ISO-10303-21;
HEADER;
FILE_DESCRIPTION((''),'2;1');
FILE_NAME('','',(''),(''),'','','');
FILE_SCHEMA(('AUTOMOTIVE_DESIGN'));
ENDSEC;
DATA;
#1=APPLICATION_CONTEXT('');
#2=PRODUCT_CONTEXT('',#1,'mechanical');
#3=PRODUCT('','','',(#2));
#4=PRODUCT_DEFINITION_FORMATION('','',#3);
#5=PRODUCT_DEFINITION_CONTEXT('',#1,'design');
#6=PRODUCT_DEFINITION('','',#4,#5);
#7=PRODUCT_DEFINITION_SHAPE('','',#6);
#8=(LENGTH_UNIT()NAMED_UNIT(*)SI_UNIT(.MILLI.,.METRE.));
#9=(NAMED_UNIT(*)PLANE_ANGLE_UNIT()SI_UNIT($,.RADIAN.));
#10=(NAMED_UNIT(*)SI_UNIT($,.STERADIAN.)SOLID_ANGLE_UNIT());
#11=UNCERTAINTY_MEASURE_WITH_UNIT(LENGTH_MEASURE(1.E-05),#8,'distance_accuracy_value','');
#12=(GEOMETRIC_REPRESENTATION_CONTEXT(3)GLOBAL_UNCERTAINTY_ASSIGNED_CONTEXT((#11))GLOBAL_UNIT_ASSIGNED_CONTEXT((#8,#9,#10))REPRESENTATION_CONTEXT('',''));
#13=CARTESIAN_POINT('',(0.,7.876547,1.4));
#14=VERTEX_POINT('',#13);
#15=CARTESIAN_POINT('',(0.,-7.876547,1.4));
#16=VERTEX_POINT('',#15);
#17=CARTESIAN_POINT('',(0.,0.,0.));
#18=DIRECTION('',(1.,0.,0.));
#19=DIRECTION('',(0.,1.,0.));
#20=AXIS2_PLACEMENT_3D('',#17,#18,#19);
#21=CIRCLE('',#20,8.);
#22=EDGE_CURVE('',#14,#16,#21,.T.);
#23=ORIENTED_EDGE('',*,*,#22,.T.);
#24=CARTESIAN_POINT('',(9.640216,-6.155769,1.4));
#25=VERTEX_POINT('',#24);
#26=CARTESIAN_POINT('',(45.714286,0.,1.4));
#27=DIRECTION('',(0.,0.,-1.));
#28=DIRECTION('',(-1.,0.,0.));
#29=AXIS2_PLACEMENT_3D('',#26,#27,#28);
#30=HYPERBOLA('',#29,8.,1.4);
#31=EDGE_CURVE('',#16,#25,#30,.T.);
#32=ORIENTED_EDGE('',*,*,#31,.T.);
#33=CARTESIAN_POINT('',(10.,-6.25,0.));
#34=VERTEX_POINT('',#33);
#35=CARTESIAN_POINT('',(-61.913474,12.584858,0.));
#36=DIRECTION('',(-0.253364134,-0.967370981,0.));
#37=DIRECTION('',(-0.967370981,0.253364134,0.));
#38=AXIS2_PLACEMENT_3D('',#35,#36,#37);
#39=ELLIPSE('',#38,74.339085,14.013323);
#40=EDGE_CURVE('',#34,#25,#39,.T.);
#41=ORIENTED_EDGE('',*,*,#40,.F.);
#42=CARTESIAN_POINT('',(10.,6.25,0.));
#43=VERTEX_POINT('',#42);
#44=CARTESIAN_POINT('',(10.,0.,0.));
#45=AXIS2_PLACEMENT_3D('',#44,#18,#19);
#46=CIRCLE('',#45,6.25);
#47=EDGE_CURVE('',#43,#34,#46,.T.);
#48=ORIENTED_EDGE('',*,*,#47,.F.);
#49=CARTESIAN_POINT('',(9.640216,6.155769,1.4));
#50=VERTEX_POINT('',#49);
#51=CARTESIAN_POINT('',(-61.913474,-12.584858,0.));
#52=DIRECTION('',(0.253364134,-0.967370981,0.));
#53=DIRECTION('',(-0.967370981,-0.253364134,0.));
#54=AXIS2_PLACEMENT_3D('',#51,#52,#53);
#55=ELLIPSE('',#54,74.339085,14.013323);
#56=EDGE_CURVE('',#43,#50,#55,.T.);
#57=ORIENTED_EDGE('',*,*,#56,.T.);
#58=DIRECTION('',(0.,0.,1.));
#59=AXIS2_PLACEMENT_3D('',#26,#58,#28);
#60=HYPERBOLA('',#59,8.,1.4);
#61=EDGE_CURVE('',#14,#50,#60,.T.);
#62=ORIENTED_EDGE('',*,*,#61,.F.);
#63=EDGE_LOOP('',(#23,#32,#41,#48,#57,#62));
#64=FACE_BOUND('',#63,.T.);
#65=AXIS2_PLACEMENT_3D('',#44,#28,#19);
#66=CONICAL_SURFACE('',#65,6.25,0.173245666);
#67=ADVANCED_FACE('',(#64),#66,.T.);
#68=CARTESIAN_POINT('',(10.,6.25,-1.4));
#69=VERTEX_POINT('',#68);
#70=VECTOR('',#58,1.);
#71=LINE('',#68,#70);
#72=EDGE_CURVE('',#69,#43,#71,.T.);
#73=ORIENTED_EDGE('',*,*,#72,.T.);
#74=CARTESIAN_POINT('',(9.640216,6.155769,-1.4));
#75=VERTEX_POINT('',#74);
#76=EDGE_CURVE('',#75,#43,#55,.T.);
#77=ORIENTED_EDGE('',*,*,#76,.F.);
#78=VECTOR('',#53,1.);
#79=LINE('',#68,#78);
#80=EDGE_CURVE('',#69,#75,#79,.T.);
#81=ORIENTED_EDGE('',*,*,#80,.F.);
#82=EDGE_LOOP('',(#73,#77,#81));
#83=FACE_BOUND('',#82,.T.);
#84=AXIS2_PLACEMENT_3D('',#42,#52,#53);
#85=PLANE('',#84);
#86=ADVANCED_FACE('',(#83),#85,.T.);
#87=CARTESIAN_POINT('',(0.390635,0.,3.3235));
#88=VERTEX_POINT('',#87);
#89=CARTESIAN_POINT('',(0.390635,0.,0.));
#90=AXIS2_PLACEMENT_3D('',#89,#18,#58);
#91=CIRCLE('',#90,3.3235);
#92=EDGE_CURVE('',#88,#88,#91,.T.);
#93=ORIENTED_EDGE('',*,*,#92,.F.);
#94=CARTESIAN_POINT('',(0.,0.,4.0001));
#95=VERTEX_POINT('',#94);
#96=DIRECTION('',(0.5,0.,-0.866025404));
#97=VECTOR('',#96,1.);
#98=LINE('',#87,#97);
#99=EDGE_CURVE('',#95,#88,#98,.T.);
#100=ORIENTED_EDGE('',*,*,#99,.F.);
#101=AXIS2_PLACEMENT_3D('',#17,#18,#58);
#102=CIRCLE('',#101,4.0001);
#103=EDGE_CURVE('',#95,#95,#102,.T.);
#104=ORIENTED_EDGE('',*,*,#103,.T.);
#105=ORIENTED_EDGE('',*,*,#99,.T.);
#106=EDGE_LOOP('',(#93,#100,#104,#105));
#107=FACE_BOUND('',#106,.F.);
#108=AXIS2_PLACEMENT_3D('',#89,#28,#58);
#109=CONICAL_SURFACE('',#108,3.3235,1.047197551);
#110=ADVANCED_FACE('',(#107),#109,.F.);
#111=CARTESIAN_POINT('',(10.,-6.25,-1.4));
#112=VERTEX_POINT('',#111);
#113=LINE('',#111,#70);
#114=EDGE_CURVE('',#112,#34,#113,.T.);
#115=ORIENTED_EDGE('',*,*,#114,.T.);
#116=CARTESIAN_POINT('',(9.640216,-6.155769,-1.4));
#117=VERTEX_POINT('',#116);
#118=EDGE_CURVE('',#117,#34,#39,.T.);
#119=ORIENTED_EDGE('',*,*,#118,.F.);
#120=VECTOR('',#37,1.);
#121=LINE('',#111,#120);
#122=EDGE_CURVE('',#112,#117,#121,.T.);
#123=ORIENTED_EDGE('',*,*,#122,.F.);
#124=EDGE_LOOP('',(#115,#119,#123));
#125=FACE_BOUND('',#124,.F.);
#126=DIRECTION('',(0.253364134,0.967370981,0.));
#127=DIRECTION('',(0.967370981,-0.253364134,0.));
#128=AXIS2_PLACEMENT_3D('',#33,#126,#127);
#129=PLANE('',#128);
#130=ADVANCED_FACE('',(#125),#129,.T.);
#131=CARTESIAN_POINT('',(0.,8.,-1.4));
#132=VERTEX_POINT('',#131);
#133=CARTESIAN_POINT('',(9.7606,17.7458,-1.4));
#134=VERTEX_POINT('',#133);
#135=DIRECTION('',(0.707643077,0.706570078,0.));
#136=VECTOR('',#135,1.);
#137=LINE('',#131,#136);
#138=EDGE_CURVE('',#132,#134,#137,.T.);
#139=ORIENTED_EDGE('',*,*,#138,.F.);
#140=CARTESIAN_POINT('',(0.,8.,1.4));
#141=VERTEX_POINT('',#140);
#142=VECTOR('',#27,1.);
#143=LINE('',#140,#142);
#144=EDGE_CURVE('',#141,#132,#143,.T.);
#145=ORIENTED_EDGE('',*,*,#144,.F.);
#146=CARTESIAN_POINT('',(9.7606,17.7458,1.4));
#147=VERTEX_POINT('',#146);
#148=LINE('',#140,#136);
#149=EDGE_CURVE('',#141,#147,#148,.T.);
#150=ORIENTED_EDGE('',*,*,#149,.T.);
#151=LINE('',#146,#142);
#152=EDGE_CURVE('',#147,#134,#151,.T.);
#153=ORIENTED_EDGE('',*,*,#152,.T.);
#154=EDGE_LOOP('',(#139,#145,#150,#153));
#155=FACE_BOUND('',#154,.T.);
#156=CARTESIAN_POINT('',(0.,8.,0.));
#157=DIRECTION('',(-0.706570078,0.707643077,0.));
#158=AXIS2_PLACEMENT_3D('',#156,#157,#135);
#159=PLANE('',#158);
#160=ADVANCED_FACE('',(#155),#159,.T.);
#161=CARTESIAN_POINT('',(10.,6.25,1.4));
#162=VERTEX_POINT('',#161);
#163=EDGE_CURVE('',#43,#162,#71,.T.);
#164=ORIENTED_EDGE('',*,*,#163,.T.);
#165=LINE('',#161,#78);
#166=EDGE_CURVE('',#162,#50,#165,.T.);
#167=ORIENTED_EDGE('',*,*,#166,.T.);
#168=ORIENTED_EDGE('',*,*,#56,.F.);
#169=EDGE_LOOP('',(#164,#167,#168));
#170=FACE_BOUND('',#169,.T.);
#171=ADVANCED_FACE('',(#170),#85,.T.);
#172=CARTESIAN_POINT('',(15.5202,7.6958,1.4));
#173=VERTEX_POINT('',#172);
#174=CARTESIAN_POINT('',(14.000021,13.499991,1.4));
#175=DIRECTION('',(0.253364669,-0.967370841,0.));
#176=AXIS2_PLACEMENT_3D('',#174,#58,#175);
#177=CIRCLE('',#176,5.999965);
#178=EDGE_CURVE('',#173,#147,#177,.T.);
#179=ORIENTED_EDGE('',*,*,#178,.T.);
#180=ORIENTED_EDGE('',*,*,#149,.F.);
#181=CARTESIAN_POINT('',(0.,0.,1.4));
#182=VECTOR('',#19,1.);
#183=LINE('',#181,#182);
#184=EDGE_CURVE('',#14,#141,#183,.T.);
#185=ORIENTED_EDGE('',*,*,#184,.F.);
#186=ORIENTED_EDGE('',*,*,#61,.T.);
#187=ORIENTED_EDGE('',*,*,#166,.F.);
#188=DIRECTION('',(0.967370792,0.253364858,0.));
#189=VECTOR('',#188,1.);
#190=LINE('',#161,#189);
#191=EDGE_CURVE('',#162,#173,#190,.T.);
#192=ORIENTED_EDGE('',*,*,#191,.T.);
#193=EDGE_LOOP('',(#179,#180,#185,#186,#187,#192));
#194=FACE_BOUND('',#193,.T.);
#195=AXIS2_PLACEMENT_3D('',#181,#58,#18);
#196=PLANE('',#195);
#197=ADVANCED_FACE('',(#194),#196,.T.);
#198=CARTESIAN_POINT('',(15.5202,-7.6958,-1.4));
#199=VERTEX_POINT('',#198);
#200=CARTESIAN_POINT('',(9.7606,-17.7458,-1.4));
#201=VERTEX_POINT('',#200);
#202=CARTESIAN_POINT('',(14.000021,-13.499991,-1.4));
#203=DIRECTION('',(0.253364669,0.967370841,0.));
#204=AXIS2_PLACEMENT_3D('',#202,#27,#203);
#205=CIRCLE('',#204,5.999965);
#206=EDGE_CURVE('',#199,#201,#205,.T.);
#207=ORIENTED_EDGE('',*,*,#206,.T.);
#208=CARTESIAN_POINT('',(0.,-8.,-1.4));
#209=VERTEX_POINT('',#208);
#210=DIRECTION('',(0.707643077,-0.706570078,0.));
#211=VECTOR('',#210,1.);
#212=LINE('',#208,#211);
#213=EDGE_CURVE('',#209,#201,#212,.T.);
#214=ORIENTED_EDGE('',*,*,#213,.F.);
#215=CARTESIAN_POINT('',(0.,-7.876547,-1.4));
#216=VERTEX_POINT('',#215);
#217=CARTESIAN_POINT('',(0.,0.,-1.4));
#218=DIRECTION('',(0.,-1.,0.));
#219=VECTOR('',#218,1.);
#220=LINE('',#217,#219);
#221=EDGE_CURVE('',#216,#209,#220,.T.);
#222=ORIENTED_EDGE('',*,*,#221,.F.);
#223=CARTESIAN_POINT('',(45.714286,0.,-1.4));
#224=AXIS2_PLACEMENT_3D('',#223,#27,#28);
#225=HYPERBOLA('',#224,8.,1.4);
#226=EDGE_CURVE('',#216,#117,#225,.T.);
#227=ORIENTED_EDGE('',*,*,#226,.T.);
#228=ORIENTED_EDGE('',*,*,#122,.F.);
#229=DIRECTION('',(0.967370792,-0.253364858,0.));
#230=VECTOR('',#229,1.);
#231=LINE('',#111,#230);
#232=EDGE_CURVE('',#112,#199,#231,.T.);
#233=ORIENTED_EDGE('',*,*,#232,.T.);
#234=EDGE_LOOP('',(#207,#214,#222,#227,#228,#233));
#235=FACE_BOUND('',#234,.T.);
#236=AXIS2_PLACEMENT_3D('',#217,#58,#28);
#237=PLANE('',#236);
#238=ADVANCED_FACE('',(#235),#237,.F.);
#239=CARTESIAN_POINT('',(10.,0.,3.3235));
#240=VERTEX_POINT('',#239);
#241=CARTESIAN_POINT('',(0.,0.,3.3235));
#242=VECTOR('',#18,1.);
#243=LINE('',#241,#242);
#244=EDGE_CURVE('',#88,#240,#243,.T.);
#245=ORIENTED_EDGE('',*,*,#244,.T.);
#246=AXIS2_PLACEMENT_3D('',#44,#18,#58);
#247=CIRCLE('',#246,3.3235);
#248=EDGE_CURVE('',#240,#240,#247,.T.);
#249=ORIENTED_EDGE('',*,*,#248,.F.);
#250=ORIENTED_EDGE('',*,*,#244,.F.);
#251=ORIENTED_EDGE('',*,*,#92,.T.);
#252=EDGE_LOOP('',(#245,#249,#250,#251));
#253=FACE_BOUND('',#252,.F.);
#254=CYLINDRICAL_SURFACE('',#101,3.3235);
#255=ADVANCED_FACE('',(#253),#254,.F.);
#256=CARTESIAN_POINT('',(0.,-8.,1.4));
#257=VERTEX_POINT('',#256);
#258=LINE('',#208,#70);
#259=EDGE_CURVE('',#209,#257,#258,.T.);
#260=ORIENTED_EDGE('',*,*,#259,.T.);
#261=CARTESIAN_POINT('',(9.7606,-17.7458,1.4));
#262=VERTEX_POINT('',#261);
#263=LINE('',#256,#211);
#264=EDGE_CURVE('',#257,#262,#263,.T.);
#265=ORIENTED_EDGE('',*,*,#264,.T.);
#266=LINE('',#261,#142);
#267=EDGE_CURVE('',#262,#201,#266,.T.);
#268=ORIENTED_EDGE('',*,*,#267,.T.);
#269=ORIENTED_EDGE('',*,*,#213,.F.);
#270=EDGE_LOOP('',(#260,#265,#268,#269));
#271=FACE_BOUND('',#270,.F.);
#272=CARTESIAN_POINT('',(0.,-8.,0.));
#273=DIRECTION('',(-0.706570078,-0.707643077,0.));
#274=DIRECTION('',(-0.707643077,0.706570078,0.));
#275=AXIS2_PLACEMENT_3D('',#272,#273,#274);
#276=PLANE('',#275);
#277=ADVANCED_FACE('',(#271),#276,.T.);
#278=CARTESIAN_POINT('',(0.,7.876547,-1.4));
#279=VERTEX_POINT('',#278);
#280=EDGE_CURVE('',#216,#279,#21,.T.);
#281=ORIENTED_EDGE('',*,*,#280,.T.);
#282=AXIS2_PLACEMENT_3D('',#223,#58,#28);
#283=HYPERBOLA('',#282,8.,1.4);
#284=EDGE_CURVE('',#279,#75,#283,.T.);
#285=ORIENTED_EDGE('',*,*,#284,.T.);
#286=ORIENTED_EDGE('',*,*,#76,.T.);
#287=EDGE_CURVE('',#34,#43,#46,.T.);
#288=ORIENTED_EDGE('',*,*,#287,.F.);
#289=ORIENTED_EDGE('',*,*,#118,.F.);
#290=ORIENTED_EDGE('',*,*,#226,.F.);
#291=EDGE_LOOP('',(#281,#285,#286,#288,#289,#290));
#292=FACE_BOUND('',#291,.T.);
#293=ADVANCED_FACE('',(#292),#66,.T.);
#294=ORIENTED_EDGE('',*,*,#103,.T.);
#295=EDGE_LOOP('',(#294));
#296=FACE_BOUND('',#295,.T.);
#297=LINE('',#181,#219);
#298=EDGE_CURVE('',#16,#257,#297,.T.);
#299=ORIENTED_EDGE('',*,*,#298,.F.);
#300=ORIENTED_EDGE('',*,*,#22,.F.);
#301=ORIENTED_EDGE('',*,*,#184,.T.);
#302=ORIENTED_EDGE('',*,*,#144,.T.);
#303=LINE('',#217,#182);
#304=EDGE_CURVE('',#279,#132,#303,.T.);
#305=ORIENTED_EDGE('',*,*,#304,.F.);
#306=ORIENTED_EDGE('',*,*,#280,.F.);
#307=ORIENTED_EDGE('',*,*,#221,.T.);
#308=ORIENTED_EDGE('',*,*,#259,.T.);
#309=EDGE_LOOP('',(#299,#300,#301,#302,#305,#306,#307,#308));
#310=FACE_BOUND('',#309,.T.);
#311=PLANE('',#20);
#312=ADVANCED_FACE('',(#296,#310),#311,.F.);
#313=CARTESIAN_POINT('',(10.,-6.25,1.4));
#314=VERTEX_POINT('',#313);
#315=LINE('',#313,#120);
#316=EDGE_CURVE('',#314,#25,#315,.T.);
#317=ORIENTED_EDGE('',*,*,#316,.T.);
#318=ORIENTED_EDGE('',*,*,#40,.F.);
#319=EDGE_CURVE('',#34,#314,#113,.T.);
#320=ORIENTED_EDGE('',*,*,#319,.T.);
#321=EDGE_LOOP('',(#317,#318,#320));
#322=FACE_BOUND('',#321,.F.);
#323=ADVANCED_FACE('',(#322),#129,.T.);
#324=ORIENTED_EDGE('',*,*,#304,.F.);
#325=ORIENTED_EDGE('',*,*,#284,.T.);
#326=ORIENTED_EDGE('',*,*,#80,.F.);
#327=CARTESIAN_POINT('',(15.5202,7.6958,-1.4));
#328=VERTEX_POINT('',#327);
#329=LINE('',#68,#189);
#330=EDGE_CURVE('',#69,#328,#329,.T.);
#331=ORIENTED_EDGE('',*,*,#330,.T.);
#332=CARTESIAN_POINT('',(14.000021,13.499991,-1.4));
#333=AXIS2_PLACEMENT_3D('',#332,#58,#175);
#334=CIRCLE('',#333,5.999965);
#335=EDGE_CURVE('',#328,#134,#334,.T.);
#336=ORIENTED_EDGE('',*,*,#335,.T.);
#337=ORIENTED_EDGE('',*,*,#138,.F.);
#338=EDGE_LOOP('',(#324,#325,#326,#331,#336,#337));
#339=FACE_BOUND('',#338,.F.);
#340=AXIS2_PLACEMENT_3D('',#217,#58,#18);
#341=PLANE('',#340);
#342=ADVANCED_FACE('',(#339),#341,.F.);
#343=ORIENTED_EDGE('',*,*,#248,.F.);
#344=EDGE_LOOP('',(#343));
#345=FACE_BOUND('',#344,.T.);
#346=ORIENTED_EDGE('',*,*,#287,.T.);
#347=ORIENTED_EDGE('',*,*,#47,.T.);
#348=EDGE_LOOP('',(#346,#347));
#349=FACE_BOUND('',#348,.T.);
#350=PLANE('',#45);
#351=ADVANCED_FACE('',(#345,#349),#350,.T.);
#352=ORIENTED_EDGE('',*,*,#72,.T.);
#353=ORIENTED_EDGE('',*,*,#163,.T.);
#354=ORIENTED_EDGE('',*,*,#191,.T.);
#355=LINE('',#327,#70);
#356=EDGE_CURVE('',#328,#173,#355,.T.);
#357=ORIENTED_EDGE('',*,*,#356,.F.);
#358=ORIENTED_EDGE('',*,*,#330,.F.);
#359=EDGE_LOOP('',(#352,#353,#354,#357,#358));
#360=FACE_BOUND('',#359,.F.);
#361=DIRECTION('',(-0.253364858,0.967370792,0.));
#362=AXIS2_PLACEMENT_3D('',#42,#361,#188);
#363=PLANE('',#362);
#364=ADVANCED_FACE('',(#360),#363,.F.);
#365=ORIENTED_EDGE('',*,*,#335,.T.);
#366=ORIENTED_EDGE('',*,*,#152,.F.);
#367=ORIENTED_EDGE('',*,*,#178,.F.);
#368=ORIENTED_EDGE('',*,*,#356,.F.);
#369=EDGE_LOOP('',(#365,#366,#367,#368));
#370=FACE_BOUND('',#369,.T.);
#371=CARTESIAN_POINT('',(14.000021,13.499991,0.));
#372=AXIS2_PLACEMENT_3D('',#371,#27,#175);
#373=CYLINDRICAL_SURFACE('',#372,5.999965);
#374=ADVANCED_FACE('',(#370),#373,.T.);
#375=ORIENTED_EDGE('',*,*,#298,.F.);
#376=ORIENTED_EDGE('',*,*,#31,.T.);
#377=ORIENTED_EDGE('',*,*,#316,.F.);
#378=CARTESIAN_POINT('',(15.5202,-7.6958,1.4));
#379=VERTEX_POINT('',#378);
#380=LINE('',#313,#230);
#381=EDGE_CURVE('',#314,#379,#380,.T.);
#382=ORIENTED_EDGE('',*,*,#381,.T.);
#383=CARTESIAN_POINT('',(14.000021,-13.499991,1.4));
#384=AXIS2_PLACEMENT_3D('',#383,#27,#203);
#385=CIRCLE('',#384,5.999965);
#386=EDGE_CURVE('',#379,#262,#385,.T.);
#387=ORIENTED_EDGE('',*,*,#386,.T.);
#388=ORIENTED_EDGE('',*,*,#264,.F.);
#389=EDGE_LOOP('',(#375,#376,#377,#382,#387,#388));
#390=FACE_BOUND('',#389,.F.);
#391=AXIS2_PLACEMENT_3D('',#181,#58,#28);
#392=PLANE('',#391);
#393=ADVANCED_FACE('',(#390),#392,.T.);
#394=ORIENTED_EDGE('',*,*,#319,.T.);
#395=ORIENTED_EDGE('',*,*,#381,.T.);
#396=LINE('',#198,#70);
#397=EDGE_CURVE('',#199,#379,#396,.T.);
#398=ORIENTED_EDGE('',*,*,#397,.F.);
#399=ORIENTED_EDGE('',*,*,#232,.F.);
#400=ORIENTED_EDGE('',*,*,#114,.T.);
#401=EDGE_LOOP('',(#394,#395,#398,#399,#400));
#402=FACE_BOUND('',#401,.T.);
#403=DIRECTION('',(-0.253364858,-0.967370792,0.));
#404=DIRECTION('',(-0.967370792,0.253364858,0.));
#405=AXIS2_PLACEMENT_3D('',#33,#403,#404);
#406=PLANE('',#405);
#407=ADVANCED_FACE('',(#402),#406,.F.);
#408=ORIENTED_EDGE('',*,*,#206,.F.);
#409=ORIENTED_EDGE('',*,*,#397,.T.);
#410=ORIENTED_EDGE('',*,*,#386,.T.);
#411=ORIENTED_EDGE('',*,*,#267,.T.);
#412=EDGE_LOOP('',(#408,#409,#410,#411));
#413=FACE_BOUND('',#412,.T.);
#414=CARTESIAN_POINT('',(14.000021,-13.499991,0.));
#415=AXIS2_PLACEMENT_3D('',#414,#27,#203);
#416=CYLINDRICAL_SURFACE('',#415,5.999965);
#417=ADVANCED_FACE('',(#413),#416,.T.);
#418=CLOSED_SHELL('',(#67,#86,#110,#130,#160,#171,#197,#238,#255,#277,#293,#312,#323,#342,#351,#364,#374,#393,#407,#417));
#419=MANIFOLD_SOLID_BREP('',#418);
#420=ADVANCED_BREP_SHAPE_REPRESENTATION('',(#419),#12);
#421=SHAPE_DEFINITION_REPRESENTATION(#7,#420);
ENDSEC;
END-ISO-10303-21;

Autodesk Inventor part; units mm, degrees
ref_plane "YZ Plane" through (0, 0, 0) normal (1, 0, 0) x (0, 1, 0)
ref_plane "XZ Plane" through (0, 0, 0) normal (0, 1, 0) x (-1, 0, 0)
sketch "Эскиз1" plane through (0, 0, 0) normal (0, 0, 1) x (1, 0, 0)
  line L0 (0, 0) -> (10, 0)
  line L1 (0, 0) -> (0, 8)
  line L2 (10, 6.25) -> (10, 0)
  line L3 (0, 8) -> (9.7606, 17.7458)
  line L4 (10, 6.25) -> (15.5202, 7.6958)
  arc A0 (15.5202, 7.6958) -> (9.7606, 17.7458) centre (14, 13.5) ccw
  line L5 (10, 6.25) -> (0, 8)
  line L6 (10, 6.25) -> (0, 3.6309)
  dimension "d0" = 12.5
  dimension "d1" = 14
  dimension "d2" = 13.5
  dimension "d3" = 6
  dimension "d4" = 10
  dimension "d5" = 16
revolve "Базовый элемент" add sketch "Эскиз1" angle 360 about axis through (0, 0, 0) along (1, 0, 0) contours L1 L6 L2 L0 | L1 L5 L6
extrude "Крыло1" add sketch "Эскиз1" along normal mid plane 2.8 contours L1 L5 L6 | L5 L3 A0 L4
fillet "Сопряжение1" [suppressed]
mirror "Крыло2" about plane through (0, 0, 0) normal (0, 1, 0) of "Крыло1"
sketch "Эскиз2" plane through (0, 0, 0) normal (1, 0, 0) x (0, 1, 0)
  line L0 (0, -14) -> (0, 14) projected
  line L1 (-14, 0) -> (14, 0) projected
  point P0 (0, 0)
hole "Резьба" at (0, 0, 0) direction (1, 0, 0) diameter 6.647 end through all thread size "M8x1.25" class "6H" standard "ISO Metric profile"
chamfer "Фаска1" distance 0.6766 angle 30 1 edges at (0, 0, -3.3235) measured on face at (0, -6.3508, -0.1335)
ref_plane "Work Plane1" through (46.6583, 0, 0) normal (0, 0, -1) x (1, 0, 0)
equation "\"d0\" = KOD2"
equation "\"d1\" = KOH1 - RR"
equation "\"d2\" = 0.5 * E0 - RR"
equation "\"d3\" = RR"
equation "\"d4\" = KOH"
equation "\"d5\" = KOD"
equation "\"d6\" = SW"
equation "\"d8\" = 0.333333 * SW"
equation "\"d9\" = -0.5 * GD1 + 0.5 * NND"
equation "\"d109\" = -0.5 * GD1 + 0.5 * NND"
equation "\"NND\" = 8"
equation "\"KOH\" = 10"
equation "\"KOH1\" = 20"
equation "\"SW\" = 2.8"
equation "\"KOD\" = 16"
equation "\"KOD2\" = 12.5"
equation "\"RR\" = 6"
equation "\"E0\" = 39"
equation "\"GUL\" = 0.541266 * PTC"
equation "\"BOR\" = 0"
equation "\"PTC\" = 1.25"
equation "\"THREADDIA\" = 8"
equation "\"TOA\" = 30deg"
equation "\"RR2\" = 3"
equation "\"SW1\" = 4.4"
equation "\"GAL\" = 0.541266 * PTC"
equation "\"GD1\" = 6.646835"
properties part number "DIN 315 - M8" material "Сталь, мягкая"
